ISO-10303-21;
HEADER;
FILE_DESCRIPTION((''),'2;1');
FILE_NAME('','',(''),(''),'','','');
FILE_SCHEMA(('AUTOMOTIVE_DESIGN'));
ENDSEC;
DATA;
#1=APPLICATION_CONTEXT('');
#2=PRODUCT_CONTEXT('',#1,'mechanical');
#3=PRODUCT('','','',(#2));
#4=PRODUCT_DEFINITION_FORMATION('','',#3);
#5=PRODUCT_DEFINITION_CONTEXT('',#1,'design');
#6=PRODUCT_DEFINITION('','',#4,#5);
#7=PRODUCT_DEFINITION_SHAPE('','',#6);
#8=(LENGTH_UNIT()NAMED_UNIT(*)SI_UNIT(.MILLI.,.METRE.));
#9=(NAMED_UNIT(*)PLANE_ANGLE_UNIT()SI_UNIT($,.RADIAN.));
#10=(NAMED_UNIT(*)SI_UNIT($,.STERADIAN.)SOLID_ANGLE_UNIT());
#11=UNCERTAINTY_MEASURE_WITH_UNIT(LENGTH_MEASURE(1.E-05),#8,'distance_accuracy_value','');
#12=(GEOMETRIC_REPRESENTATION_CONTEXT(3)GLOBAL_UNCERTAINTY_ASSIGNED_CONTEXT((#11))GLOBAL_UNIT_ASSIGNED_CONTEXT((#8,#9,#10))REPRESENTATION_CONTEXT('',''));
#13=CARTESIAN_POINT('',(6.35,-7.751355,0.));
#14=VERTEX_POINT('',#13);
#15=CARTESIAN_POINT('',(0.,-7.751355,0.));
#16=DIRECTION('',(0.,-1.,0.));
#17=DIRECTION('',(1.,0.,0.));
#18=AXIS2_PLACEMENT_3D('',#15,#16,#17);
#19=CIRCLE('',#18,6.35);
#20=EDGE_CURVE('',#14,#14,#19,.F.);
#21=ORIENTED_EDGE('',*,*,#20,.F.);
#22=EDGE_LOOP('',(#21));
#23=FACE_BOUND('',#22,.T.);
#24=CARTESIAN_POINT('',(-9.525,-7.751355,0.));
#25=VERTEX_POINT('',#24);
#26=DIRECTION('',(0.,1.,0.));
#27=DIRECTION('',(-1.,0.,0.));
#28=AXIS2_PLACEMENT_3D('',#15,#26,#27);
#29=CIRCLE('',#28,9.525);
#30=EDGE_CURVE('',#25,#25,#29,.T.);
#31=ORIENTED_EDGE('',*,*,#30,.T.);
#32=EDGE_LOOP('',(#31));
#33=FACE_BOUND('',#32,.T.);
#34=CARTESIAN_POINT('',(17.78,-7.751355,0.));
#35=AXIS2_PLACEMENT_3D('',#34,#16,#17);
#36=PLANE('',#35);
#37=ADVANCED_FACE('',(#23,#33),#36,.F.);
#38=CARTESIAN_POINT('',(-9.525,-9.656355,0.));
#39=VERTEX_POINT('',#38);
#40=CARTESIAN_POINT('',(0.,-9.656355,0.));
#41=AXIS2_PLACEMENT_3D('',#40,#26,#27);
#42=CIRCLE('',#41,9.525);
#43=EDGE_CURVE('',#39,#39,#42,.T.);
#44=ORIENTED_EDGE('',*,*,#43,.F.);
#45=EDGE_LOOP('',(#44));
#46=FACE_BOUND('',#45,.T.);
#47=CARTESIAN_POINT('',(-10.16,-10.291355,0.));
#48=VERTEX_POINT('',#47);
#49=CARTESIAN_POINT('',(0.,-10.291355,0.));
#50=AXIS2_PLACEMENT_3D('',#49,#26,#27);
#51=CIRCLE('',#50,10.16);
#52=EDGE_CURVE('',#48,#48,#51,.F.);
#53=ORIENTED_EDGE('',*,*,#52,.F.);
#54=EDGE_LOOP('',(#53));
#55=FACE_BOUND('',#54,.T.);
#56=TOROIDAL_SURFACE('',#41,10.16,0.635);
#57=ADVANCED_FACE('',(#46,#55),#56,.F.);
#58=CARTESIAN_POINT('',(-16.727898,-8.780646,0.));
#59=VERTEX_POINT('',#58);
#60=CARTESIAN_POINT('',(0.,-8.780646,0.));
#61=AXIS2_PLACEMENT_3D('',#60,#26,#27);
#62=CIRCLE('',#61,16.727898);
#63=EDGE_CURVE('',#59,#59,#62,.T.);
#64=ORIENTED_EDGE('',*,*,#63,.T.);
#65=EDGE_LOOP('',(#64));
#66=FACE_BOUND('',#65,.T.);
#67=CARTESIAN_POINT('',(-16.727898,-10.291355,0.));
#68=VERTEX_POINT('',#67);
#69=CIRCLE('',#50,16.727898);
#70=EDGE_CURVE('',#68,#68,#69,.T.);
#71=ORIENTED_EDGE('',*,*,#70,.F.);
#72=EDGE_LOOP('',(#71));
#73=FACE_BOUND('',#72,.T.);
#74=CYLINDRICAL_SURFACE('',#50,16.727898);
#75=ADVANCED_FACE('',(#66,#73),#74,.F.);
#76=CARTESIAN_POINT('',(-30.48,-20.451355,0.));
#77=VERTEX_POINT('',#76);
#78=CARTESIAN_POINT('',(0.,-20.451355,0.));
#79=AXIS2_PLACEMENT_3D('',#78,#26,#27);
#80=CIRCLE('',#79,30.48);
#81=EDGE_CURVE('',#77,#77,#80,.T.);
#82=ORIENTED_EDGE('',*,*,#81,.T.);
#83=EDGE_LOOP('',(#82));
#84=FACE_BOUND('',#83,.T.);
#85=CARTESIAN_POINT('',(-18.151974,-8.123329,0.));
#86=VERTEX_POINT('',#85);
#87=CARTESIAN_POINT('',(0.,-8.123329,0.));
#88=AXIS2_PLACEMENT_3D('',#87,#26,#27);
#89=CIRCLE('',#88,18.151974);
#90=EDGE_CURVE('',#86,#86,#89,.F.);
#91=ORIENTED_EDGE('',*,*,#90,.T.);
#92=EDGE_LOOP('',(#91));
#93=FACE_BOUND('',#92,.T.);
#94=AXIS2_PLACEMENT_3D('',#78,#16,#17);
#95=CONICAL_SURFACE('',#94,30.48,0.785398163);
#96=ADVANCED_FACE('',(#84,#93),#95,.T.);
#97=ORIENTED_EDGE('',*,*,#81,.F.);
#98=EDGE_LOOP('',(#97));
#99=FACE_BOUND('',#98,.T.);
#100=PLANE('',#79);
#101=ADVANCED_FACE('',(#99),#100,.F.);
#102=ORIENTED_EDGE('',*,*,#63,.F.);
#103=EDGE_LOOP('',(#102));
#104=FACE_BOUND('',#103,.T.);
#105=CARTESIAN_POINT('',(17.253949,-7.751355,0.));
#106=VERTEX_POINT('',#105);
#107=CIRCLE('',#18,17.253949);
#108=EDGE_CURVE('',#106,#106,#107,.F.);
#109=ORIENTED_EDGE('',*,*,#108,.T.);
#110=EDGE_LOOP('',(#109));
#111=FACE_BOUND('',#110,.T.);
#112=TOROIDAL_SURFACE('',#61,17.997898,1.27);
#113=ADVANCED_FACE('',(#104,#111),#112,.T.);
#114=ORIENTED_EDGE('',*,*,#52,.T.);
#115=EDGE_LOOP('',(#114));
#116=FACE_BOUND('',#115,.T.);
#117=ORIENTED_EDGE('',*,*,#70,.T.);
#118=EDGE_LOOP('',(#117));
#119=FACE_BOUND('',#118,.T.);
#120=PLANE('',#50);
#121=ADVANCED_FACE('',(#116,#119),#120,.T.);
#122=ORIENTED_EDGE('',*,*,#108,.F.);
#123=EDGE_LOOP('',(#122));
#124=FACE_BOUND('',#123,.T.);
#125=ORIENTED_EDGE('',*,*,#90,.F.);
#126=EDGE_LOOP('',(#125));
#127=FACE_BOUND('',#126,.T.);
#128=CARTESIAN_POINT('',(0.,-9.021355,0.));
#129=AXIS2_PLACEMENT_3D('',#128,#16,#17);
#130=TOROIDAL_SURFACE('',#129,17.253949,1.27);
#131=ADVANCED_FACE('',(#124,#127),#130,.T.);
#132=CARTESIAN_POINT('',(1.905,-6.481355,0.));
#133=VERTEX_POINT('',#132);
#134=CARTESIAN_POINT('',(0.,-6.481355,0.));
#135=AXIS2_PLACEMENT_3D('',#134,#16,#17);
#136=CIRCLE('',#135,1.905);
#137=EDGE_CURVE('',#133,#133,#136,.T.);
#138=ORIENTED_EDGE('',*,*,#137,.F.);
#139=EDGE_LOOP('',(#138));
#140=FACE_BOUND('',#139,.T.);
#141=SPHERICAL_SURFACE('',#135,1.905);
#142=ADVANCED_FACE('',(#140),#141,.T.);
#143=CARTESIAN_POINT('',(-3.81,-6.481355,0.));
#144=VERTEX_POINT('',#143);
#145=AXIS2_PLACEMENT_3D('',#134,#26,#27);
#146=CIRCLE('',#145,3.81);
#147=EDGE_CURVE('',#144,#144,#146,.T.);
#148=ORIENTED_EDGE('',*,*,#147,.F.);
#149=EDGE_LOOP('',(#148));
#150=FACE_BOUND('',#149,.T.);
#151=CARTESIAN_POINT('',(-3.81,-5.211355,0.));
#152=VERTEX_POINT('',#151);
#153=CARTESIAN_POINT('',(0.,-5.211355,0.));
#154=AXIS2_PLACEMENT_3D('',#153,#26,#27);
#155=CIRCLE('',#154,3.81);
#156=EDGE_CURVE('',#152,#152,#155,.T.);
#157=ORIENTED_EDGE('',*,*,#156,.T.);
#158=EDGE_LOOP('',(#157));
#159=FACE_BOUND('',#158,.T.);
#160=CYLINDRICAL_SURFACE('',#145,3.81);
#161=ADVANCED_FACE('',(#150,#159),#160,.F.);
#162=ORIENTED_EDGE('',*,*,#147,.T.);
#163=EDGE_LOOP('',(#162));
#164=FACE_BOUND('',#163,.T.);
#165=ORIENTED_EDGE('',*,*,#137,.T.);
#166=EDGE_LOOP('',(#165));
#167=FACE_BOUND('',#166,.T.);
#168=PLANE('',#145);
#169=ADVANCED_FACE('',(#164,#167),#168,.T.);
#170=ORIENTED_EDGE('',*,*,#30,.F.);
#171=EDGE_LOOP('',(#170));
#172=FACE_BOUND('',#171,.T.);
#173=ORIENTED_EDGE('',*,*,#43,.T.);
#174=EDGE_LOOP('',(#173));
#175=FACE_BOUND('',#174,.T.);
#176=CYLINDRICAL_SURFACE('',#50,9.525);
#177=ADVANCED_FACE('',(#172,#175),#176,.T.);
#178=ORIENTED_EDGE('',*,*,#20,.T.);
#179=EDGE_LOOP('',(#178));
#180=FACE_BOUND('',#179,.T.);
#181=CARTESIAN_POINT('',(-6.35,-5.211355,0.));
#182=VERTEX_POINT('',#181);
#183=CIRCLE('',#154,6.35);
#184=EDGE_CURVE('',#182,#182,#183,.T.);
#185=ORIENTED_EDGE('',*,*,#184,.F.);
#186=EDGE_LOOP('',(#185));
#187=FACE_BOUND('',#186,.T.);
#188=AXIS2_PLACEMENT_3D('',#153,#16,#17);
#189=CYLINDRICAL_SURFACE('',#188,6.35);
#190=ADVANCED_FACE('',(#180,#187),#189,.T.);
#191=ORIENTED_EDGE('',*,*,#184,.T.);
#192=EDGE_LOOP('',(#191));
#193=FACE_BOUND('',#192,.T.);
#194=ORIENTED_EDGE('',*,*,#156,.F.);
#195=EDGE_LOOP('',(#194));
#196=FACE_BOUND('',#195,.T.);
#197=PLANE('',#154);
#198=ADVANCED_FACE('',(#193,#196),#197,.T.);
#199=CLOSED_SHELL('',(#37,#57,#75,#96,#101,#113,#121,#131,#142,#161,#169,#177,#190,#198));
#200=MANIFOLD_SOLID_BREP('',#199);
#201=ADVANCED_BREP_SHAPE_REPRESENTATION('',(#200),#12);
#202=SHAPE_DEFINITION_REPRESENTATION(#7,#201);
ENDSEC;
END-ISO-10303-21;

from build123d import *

# Parameters (mm, degrees)
FILLET1_R           = 2.54
SKETCH3_R           = 33.455795103
SKETCH3_R_2         = 19.05
CUT_EXTRUDE1_DEPTH  = 5.08
SKETCH4_R           = 12.7
BOSS_EXTRUDE1_DEPTH = 5.08
SKETCH5_R           = 7.62
CUT_EXTRUDE2_DEPTH  = 2.54
FILLET6_R           = 1.27
REVOLVE2_ANGLE      = 180
SCALE1_SCALE        = 0.5


with BuildPart() as part:
    # Sketch1 → Revolve1 (revolve)
    with BuildSketch(Plane.XY, mode=Mode.PRIVATE) as revolve1_sk:
        Polygon((0, 0), (0, -25.4), (60.96, -25.4), (35.56, 0), align=None)
    revolve(revolve1_sk.sketch.rotate(Axis((0, 0, 0), (0, -1, 0)), 180), axis=Axis((0, 0, 0), (0, -1, 0)))

    # Fillet1
    fillet1_edges = [part.edges().sort_by_distance(p)[0] for p in [
        (35.56, 0, 0),
    ]]
    fillet(fillet1_edges, radius=FILLET1_R)

    # Sketch3 → Cut-Extrude1 (cut)
    with BuildSketch(Plane(origin=(0, 0, 0), x_dir=(1, 0, 0), z_dir=(0, 1, 0))):
        with Locations(Location((0, 0, 0), (0, 0, 180))):
            Circle(SKETCH3_R)
        with Locations(Location((0, 0, 0), (0, 0, 180))):
            Circle(SKETCH3_R_2, mode=Mode.SUBTRACT)
    extrude(amount=-CUT_EXTRUDE1_DEPTH, mode=Mode.SUBTRACT)

    # Fillet4: read off the stored shape, not the designer's step
    # Fillet4 outline → Fillet4 (revolve, cut)
    with BuildSketch(Plane.XY):
        with BuildLine():
            ThreePointArc((33.455795103, -2.058582249), (33.73406349, -0.902654003), (34.507897552, 0))
            Line((34.507897552, 0), (33.455795103, 0))
            Line((33.455795103, 0), (33.455795103, -2.058582249))
        make_face()
    revolve(axis=Axis((0, 0, 0), (0, 1, 0)), mode=Mode.SUBTRACT)

    # Sketch4 → Boss-Extrude1 (add)
    with BuildSketch(Plane(origin=(0, 0, 0), x_dir=(1, 0, 0), z_dir=(0, 1, 0))):
        Circle(SKETCH4_R)
    extrude(amount=BOSS_EXTRUDE1_DEPTH)

    # Sketch5 → Cut-Extrude2 (cut)
    with BuildSketch(Plane(origin=(0, 5.08, 0), x_dir=(1, 0, 0), z_dir=(0, 1, 0))):
        with Locations(Location((0, 0, 0), (0, 0, 180))):
            Circle(SKETCH5_R)
    extrude(amount=-CUT_EXTRUDE2_DEPTH, mode=Mode.SUBTRACT)

    # Fillet6
    fillet6_edges = [part.edges().sort_by_distance(p)[0] for p in [
        (19.05, -5.08, 0),
    ]]
    fillet(fillet6_edges, radius=FILLET6_R)

    # Sketch6 → Revolve2 (revolve)
    with BuildSketch(Plane(origin=(0, 2.54, 0), x_dir=(1, 0, 0), z_dir=(0, 1, 0))):
        with BuildLine():
            Line((0, -3.81), (0, 3.81))
            ThreePointArc((0, 3.81), (-3.81, 0), (0, -3.81))
        make_face()
    revolve(axis=Axis((0, 2.54, 3.81), (0, 0, -1)), revolution_arc=REVOLVE2_ANGLE)


with BuildPart() as part_1:
    # Scale1: scaled about (0, -15.502710002, 0)
    add(part.part.scale(SCALE1_SCALE).moved(Location((0, -7.751355001, 0))))


solid = part_1.part
